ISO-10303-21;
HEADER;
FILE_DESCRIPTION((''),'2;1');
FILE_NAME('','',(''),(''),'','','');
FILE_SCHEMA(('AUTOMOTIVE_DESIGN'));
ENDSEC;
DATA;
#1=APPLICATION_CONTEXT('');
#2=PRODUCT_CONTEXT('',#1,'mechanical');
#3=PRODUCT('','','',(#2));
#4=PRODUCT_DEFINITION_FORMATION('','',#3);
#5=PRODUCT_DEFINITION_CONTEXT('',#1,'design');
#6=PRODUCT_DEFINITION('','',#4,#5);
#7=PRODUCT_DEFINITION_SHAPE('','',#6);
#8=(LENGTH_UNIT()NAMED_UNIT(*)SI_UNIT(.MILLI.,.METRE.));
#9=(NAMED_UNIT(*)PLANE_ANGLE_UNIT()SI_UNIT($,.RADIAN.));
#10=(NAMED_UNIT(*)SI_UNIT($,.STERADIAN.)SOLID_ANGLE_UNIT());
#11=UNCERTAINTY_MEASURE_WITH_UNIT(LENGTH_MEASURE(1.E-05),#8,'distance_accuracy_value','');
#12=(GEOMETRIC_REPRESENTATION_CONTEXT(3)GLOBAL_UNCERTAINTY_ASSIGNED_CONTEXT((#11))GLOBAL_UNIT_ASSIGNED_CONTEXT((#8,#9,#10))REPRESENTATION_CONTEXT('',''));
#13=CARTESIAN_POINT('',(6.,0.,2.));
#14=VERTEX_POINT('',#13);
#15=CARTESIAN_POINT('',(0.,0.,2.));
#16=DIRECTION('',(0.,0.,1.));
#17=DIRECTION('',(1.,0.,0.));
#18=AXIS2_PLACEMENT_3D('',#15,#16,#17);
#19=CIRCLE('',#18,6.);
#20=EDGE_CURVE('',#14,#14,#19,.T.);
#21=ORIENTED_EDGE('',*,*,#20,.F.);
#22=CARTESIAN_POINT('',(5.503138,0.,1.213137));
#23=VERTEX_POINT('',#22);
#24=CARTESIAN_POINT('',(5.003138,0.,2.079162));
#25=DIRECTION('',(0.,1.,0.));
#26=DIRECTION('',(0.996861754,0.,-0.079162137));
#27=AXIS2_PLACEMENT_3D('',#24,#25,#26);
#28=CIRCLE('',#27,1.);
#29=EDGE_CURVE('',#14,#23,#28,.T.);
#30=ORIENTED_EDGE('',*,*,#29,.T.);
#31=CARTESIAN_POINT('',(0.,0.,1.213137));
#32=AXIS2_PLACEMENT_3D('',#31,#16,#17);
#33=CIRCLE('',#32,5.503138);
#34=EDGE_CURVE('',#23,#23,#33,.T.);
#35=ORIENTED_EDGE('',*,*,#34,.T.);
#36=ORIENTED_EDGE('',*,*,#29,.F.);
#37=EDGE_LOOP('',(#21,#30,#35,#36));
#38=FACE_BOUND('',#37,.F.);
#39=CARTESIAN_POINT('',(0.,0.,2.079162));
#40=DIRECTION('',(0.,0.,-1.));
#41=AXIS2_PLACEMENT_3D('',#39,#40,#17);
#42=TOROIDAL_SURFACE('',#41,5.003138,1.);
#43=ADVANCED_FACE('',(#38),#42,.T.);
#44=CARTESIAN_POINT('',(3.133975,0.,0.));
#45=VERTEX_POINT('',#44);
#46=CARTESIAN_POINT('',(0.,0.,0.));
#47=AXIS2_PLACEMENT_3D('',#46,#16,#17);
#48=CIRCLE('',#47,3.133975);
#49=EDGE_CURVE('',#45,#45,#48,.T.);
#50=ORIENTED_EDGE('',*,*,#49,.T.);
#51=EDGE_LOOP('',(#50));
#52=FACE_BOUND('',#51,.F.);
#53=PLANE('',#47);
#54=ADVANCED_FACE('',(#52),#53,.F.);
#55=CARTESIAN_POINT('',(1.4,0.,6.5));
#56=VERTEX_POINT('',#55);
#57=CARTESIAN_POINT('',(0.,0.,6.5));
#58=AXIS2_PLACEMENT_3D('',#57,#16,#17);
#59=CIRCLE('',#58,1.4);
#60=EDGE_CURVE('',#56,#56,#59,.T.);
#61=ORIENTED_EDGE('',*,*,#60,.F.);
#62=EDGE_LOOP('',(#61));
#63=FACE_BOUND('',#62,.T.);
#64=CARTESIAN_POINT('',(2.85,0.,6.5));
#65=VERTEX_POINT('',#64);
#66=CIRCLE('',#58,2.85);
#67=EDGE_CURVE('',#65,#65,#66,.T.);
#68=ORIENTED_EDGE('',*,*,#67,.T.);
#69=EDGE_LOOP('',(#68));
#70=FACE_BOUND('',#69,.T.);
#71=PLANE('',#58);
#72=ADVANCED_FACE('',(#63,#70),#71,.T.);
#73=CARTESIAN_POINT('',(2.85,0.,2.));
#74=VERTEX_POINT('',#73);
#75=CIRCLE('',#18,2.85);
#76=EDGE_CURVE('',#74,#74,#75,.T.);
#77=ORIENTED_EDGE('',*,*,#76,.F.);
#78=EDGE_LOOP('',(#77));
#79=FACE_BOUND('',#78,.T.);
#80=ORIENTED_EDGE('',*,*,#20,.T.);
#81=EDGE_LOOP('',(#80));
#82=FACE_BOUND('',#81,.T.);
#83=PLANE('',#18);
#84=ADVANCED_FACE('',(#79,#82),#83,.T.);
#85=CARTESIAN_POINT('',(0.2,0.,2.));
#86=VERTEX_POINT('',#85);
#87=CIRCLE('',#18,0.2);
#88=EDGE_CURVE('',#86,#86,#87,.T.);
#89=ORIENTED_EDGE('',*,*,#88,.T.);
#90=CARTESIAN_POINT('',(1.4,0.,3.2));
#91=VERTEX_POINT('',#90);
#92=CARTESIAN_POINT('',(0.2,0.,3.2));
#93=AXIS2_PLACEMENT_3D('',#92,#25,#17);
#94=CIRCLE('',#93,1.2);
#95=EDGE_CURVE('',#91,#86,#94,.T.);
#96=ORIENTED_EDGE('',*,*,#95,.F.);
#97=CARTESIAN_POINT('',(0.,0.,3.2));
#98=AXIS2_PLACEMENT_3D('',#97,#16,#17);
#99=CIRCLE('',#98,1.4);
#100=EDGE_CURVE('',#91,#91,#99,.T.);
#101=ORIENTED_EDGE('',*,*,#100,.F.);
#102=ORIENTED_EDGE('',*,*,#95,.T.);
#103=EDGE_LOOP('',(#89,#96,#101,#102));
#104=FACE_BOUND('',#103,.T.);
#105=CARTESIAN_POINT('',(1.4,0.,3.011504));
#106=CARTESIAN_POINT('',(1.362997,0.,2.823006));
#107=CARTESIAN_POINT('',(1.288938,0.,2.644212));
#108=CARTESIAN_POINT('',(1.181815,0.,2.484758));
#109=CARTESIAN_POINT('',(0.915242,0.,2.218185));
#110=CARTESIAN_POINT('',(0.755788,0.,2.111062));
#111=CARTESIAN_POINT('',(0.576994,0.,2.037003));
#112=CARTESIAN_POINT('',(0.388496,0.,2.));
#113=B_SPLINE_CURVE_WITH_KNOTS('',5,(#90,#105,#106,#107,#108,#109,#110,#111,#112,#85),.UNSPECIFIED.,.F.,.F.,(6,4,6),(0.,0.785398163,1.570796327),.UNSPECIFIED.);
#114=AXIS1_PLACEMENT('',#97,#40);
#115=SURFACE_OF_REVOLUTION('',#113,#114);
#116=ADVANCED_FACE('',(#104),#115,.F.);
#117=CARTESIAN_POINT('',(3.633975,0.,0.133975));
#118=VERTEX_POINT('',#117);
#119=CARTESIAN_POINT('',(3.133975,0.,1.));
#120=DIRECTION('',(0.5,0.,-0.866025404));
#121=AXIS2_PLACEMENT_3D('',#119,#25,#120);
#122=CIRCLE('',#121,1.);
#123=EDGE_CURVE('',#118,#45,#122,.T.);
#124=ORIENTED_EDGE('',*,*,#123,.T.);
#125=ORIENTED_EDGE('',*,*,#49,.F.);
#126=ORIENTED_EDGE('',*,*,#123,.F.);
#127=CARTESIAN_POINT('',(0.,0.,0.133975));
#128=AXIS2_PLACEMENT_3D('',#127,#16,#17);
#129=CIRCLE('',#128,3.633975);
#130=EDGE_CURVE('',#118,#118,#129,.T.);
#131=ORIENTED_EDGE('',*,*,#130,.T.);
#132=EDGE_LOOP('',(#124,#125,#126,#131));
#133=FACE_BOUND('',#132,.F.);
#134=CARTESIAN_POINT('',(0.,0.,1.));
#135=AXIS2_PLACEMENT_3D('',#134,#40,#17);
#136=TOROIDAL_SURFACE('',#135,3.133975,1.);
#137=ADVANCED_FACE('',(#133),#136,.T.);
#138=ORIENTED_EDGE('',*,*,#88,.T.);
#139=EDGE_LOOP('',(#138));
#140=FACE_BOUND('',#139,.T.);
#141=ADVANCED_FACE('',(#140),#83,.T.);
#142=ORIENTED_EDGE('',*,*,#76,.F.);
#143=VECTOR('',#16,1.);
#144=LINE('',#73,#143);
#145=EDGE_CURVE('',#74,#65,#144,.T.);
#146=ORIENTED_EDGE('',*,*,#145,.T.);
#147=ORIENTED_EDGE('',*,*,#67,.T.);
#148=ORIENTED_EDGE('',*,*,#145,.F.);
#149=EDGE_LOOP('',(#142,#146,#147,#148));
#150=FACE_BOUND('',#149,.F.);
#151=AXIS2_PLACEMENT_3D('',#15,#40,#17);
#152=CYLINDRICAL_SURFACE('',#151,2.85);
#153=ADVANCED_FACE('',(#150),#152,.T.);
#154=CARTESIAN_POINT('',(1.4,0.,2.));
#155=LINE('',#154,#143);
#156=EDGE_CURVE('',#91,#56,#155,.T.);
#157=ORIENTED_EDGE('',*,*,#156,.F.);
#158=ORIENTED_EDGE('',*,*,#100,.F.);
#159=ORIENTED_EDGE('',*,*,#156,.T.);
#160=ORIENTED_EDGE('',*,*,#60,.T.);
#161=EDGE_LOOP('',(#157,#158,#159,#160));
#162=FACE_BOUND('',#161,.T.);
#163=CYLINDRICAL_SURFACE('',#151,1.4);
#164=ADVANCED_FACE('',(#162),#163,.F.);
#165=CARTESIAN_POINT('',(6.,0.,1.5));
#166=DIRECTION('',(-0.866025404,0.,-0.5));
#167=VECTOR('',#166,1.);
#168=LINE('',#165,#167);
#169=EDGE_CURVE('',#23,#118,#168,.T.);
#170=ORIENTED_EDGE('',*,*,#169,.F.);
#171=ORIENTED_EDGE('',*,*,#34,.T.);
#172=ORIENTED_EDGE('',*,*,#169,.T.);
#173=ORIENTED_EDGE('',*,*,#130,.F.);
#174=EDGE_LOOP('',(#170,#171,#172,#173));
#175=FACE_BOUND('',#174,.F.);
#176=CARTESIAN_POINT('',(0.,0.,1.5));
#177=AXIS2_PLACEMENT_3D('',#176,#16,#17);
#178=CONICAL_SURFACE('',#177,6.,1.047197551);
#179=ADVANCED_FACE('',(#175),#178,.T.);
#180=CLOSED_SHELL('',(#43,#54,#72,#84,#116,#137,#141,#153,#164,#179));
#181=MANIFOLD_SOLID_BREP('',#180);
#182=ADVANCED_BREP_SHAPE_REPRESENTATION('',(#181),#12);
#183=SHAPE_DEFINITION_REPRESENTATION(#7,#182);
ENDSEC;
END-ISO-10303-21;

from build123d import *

# Parameters (mm, degrees)
F0_R     = 6
F1_DEPTH = 2
F2_SIZE2 = 2.5980762114
F2_SIZE  = 1.5
F4_R     = 2.85
F4_R_2   = 1.4
F5_DEPTH = 4.5
F6_R     = 1.2


# Not quite as in the source:
# - a fillet or chamfer that OpenCascade refuses, or shapes differently, is made with other operations: its cross-section is extruded or revolved along the edge and cut away or added


with BuildPart() as f1:
    # F0 (on Top) → F1 (new body)
    with BuildSketch(Plane.XY):
        Circle(F0_R)
    extrude(amount=F1_DEPTH)

    # F2
    f2_edges = [f1.edges().sort_by_distance(p)[0] for p in [
        (-6, 0, 0),
    ]]
    f2_side = f1.faces().sort_by_distance((-6, 0, 1))[0]
    chamfer(f2_edges, length=F2_SIZE, length2=F2_SIZE2, reference=f2_side)

    # F3: fillet of radius 1 on 2 edges, made by hand

    # F3_s1 → F3_t2 (revolve, cut)
    with BuildSketch(Plane.XZ):
        with BuildLine():
            ThreePointArc((3.6339745962, 0.1339745962), (3.3927936413, 0.0340741737), (3.1339745962, 0))
            Line((3.1339745962, 0), (3.4019237886, 0))
            Line((3.4019237886, 0), (3.6339745962, 0.1339745962))
        make_face()
    revolve(axis=Axis((0, 0, 0), (0, 0, 1)), mode=Mode.SUBTRACT)

    # F3_s3 → F3_t4 (revolve, cut)
    with BuildSketch(Plane.XZ):
        with BuildLine():
            ThreePointArc((6, 2), (5.8486778537, 1.5452494356), (5.5031382462, 1.2131367327))
            Line((5.5031382462, 1.2131367327), (6, 1.5))
            Line((6, 1.5), (6, 2))
        make_face()
    revolve(axis=Axis((0, 0, 1.5), (0, 0, 1)), mode=Mode.SUBTRACT)

    # F4 (on face) → F5 (join)
    with BuildSketch(Plane.XY.offset(2)):
        Circle(F4_R)
        Circle(F4_R_2, mode=Mode.SUBTRACT)
    extrude(amount=F5_DEPTH)

    # F6
    f6_edges = [f1.edges().sort_by_distance(p)[0] for p in [
        (-1.4, 0, 2),
    ]]
    fillet(f6_edges, radius=F6_R)


solid = f1.part
